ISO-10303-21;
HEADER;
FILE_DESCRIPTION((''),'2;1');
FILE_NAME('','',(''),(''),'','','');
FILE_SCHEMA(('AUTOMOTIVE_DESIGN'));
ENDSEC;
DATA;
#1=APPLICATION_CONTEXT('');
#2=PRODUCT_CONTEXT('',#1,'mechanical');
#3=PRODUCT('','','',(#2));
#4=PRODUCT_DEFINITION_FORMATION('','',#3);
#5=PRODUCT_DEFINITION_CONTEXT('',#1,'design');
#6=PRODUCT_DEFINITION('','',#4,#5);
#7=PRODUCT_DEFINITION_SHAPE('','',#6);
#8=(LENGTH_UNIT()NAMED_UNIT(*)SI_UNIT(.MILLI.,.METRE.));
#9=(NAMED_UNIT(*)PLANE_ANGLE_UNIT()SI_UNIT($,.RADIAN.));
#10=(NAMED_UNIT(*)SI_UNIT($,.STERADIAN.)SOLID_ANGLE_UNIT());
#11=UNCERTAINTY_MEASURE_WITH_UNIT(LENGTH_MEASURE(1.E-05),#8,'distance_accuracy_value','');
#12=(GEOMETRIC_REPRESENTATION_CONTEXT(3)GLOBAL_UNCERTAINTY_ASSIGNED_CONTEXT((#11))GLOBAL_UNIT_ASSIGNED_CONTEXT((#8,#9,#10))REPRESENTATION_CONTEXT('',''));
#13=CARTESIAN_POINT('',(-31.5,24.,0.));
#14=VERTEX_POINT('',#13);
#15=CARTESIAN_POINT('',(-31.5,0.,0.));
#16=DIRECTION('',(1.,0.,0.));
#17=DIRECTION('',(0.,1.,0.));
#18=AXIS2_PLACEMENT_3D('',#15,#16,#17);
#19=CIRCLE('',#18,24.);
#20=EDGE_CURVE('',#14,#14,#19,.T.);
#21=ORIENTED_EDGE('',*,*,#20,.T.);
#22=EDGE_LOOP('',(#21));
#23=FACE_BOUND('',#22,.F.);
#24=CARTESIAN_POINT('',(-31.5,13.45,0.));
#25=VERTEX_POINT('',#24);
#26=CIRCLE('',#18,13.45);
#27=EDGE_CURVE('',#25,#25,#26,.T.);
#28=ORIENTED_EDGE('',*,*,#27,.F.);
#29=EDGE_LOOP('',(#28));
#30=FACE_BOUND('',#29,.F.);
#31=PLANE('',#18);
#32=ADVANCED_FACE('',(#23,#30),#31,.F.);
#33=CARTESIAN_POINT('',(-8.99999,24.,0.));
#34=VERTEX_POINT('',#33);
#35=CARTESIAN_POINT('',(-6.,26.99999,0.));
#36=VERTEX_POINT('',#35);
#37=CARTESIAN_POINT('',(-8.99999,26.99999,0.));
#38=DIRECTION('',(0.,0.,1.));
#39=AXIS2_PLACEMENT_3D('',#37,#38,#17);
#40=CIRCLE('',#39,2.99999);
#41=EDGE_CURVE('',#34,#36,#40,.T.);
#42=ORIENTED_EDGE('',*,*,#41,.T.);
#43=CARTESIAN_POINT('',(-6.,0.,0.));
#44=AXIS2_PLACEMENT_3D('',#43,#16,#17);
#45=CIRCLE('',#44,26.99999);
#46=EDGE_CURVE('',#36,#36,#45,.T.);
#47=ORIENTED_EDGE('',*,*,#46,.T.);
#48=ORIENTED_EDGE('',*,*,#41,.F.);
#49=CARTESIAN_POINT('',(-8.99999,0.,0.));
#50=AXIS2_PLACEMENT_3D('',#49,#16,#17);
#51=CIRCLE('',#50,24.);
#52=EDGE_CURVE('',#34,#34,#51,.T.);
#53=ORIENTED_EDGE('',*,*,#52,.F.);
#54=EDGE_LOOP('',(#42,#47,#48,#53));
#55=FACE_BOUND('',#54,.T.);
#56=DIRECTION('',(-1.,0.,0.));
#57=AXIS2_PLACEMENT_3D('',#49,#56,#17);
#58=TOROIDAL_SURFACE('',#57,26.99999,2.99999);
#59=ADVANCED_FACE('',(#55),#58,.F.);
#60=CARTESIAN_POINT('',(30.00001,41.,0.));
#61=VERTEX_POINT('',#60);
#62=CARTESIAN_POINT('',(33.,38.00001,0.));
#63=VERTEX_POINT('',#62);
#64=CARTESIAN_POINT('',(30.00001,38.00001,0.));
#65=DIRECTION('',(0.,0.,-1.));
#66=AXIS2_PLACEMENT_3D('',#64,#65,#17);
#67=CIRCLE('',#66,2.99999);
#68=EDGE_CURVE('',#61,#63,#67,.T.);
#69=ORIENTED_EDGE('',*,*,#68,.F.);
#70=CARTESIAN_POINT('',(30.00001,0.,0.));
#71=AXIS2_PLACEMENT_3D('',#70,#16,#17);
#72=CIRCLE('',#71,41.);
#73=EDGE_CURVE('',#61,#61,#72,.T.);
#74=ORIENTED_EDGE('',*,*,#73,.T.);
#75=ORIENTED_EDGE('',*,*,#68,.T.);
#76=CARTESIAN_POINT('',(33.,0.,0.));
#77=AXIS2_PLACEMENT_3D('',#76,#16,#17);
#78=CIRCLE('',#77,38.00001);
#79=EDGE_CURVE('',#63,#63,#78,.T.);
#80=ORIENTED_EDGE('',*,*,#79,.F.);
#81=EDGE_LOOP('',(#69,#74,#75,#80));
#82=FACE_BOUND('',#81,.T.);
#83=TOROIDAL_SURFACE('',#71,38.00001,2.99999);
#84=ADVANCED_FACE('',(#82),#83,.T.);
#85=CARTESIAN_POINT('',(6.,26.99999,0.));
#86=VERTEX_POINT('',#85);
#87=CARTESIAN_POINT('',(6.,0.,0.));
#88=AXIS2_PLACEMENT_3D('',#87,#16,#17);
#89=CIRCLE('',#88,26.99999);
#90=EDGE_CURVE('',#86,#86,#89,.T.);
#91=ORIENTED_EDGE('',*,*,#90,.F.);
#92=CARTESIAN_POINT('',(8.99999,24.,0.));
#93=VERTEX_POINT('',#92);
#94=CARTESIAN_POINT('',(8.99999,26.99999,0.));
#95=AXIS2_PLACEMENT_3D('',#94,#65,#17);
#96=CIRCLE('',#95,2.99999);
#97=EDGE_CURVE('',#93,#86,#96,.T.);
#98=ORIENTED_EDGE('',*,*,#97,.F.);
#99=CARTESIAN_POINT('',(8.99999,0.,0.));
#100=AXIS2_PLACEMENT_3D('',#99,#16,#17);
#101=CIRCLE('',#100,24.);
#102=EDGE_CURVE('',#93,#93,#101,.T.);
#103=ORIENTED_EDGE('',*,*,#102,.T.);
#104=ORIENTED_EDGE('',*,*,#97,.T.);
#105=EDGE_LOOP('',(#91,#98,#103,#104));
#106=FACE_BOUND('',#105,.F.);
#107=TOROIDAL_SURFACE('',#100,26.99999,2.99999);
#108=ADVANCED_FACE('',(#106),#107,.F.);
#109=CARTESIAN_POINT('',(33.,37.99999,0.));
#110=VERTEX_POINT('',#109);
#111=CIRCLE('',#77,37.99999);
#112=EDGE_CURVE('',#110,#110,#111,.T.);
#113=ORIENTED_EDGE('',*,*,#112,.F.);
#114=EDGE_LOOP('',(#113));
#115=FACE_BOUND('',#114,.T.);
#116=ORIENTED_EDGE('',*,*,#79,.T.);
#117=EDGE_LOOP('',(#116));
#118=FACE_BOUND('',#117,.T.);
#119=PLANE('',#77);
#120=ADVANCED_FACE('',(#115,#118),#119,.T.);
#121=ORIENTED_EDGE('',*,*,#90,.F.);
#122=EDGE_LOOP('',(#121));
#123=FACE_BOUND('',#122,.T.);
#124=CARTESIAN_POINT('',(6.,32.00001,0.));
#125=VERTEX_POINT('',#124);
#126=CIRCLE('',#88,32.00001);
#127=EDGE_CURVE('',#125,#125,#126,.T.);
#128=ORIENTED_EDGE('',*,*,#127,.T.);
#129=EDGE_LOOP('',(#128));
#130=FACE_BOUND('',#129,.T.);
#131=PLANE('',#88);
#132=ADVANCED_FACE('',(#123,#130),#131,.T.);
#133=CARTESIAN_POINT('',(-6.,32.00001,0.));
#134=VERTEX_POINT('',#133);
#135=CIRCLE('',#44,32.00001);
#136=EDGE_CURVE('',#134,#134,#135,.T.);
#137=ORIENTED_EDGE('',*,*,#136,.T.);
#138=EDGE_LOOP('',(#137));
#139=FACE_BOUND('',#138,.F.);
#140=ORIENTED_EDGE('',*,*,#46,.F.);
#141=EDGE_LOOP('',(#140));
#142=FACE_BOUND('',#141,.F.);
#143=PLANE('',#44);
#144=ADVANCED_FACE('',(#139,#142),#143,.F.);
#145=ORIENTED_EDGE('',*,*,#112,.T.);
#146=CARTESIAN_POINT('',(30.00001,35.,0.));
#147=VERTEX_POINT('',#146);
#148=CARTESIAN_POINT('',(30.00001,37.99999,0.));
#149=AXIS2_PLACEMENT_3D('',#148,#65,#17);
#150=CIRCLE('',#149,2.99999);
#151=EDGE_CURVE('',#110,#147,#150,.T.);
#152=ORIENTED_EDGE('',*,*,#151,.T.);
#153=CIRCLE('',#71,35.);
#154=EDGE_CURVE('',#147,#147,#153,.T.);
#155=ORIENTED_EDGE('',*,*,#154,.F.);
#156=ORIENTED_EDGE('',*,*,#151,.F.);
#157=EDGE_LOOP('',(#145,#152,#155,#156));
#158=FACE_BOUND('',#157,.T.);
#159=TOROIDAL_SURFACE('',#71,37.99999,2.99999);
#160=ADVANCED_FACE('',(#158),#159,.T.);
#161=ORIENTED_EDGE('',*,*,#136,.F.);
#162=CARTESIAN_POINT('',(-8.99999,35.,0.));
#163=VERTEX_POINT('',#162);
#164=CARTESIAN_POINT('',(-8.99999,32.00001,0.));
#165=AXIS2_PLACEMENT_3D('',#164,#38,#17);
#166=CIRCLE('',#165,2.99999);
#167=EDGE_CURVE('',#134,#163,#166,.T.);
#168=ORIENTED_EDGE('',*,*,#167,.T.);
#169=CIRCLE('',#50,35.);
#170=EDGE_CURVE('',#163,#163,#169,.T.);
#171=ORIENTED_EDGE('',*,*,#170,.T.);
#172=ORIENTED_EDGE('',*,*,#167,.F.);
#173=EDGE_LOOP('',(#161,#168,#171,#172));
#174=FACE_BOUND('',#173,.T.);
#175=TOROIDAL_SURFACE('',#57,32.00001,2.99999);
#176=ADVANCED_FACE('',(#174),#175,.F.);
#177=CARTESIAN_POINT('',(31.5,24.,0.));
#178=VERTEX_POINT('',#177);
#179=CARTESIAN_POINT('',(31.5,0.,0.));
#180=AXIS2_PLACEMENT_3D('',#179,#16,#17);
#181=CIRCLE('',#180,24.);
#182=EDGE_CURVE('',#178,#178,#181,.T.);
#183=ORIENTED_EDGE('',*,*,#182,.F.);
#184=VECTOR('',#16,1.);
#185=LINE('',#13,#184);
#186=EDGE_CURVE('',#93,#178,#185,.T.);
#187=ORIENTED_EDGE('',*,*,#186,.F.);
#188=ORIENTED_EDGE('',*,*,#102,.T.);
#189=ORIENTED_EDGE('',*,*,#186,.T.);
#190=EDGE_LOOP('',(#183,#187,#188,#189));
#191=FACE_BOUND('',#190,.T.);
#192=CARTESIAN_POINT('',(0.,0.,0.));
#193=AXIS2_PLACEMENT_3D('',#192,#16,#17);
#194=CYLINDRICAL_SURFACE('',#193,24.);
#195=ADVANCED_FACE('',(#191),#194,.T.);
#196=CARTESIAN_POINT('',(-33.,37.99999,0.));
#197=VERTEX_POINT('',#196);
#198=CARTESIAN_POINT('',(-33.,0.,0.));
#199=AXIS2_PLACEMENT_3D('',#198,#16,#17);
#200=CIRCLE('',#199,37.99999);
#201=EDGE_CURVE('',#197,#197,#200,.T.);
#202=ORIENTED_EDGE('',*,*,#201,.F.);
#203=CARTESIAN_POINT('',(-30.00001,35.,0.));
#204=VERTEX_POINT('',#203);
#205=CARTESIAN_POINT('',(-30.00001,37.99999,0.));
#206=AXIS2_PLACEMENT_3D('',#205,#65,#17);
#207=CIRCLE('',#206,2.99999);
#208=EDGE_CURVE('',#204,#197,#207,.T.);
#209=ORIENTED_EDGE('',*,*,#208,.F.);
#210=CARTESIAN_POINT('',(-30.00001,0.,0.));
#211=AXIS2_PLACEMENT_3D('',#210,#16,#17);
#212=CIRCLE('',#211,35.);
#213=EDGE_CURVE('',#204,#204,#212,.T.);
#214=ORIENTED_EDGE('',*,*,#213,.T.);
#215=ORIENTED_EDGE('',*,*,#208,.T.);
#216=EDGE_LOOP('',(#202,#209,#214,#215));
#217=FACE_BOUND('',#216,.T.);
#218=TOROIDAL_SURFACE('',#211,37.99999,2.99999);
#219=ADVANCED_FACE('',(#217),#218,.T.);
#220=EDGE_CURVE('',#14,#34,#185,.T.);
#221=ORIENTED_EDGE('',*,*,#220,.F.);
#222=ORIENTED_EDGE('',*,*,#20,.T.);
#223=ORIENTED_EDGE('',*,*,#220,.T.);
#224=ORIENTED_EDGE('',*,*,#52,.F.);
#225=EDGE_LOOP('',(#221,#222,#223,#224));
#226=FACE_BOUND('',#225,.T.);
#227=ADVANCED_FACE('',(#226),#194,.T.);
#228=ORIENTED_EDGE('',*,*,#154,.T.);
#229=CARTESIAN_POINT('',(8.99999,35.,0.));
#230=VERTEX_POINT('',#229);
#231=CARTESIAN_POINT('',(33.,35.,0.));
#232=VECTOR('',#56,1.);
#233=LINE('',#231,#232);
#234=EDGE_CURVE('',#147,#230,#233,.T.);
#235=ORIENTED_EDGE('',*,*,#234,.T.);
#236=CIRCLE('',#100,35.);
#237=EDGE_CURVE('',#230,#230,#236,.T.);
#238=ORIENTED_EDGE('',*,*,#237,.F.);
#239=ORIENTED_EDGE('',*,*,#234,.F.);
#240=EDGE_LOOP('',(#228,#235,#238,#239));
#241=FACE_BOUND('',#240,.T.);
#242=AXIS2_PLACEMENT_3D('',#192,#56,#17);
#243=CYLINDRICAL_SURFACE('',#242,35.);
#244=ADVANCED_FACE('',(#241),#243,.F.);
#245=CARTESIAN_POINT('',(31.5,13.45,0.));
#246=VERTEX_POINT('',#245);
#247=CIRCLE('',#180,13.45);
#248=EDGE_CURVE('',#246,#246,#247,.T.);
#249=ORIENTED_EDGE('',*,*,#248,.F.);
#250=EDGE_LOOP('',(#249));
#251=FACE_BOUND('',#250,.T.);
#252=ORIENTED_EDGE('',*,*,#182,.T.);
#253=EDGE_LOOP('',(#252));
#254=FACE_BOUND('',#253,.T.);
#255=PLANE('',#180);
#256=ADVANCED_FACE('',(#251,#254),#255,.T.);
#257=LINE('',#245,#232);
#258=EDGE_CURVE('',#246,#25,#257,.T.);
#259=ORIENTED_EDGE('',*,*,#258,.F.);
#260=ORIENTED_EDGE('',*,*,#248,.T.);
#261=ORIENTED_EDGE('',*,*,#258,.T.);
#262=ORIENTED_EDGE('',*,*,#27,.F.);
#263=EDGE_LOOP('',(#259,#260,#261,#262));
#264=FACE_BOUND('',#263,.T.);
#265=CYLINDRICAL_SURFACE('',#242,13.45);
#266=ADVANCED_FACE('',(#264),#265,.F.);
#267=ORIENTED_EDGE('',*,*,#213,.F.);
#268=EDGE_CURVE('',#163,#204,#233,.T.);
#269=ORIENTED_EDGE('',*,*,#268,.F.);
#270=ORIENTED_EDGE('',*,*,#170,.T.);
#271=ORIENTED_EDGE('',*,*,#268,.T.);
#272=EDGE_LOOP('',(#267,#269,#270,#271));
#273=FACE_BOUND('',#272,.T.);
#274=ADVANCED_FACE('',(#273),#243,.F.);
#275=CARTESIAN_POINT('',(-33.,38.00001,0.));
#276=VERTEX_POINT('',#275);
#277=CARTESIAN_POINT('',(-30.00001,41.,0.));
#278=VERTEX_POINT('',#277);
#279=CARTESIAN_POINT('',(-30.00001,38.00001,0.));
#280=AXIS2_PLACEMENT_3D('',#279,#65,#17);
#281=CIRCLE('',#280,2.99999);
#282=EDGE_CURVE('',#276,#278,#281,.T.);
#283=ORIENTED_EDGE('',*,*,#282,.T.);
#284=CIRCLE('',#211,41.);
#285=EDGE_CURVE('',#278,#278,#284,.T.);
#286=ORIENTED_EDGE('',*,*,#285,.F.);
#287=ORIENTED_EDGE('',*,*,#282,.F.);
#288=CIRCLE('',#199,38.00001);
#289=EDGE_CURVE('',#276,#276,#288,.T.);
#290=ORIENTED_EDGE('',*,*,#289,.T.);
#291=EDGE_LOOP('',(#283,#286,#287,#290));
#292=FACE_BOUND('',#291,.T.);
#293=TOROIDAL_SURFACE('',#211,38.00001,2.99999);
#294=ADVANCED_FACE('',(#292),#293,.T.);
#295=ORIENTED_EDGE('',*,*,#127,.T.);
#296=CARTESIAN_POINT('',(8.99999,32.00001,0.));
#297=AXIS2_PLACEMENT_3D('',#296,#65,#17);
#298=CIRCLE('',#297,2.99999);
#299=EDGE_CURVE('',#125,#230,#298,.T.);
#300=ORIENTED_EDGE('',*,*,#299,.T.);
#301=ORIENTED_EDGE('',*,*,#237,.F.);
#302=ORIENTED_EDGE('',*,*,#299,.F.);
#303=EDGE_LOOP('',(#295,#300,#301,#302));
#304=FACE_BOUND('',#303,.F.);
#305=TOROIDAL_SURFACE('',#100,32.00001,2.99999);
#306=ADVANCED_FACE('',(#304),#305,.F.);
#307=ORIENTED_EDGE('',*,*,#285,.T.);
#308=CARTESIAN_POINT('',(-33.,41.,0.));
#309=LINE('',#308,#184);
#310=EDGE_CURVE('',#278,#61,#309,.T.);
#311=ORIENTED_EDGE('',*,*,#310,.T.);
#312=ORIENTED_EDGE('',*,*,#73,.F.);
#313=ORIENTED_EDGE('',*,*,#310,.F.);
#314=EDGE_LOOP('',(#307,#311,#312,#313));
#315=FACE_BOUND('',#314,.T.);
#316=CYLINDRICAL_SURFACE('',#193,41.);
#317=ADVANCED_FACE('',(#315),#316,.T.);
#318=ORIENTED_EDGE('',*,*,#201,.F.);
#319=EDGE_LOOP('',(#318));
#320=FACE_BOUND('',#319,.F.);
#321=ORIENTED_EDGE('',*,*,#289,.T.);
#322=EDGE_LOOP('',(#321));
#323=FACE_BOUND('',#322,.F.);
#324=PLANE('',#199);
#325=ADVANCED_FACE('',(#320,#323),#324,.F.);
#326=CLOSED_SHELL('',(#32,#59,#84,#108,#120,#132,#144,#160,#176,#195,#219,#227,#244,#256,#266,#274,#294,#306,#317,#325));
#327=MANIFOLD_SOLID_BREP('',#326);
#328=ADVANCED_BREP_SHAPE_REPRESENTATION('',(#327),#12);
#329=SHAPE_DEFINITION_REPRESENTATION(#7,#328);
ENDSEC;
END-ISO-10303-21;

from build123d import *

# Parameters (mm, degrees)
F0_R     = 41
F0_R_2   = 35
F1_DEPTH = 33
F0_R_3   = 24
F0_R_4   = 13.45
F2_DEPTH = 31.5
F3_DEPTH = 6
F4_R     = 2.99999


# Not quite as in the source:
# - a fillet or chamfer is up to 0.001 mm smaller than in the source, because OpenCascade refuses the exact size


with BuildPart() as f1:
    # F0 (on Right) → F1 (new body, symmetric)
    with BuildSketch(Plane.YZ):
        Circle(F0_R)
        Circle(F0_R_2, mode=Mode.SUBTRACT)
    extrude(amount=F1_DEPTH, both=True)



with BuildPart() as f2:
    # F0 (on Right) → F2 (new body, symmetric)
    with BuildSketch(Plane.YZ):
        Circle(F0_R_3)
        Circle(F0_R_4, mode=Mode.SUBTRACT)
    extrude(amount=F2_DEPTH, both=True)


with BuildPart() as f1_1:
    add(f1.part)

    add(f2.part)  # F3 merges F2
    # F0 (on Right) → F3 (join, symmetric)
    with BuildSketch(Plane.YZ):
        Circle(F0_R_2)
        Circle(F0_R_3, mode=Mode.SUBTRACT)
    extrude(amount=F3_DEPTH, both=True)

    # F4 (radius 3 in the source; OpenCascade refuses exactly that, so slightly less here)
    f4_edges = [f1_1.edges().sort_by_distance(p)[0] for p in [
        (33, -35, 0),
        (6, -24, 0),
        (6, -35, 0),
        (33, -41, 0),
        (-6, -35, 0),
        (-6, -24, 0),
        (-33, -35, 0),
        (-33, -41, 0),
    ]]
    fillet(f4_edges, radius=F4_R)


solid = f1_1.part
